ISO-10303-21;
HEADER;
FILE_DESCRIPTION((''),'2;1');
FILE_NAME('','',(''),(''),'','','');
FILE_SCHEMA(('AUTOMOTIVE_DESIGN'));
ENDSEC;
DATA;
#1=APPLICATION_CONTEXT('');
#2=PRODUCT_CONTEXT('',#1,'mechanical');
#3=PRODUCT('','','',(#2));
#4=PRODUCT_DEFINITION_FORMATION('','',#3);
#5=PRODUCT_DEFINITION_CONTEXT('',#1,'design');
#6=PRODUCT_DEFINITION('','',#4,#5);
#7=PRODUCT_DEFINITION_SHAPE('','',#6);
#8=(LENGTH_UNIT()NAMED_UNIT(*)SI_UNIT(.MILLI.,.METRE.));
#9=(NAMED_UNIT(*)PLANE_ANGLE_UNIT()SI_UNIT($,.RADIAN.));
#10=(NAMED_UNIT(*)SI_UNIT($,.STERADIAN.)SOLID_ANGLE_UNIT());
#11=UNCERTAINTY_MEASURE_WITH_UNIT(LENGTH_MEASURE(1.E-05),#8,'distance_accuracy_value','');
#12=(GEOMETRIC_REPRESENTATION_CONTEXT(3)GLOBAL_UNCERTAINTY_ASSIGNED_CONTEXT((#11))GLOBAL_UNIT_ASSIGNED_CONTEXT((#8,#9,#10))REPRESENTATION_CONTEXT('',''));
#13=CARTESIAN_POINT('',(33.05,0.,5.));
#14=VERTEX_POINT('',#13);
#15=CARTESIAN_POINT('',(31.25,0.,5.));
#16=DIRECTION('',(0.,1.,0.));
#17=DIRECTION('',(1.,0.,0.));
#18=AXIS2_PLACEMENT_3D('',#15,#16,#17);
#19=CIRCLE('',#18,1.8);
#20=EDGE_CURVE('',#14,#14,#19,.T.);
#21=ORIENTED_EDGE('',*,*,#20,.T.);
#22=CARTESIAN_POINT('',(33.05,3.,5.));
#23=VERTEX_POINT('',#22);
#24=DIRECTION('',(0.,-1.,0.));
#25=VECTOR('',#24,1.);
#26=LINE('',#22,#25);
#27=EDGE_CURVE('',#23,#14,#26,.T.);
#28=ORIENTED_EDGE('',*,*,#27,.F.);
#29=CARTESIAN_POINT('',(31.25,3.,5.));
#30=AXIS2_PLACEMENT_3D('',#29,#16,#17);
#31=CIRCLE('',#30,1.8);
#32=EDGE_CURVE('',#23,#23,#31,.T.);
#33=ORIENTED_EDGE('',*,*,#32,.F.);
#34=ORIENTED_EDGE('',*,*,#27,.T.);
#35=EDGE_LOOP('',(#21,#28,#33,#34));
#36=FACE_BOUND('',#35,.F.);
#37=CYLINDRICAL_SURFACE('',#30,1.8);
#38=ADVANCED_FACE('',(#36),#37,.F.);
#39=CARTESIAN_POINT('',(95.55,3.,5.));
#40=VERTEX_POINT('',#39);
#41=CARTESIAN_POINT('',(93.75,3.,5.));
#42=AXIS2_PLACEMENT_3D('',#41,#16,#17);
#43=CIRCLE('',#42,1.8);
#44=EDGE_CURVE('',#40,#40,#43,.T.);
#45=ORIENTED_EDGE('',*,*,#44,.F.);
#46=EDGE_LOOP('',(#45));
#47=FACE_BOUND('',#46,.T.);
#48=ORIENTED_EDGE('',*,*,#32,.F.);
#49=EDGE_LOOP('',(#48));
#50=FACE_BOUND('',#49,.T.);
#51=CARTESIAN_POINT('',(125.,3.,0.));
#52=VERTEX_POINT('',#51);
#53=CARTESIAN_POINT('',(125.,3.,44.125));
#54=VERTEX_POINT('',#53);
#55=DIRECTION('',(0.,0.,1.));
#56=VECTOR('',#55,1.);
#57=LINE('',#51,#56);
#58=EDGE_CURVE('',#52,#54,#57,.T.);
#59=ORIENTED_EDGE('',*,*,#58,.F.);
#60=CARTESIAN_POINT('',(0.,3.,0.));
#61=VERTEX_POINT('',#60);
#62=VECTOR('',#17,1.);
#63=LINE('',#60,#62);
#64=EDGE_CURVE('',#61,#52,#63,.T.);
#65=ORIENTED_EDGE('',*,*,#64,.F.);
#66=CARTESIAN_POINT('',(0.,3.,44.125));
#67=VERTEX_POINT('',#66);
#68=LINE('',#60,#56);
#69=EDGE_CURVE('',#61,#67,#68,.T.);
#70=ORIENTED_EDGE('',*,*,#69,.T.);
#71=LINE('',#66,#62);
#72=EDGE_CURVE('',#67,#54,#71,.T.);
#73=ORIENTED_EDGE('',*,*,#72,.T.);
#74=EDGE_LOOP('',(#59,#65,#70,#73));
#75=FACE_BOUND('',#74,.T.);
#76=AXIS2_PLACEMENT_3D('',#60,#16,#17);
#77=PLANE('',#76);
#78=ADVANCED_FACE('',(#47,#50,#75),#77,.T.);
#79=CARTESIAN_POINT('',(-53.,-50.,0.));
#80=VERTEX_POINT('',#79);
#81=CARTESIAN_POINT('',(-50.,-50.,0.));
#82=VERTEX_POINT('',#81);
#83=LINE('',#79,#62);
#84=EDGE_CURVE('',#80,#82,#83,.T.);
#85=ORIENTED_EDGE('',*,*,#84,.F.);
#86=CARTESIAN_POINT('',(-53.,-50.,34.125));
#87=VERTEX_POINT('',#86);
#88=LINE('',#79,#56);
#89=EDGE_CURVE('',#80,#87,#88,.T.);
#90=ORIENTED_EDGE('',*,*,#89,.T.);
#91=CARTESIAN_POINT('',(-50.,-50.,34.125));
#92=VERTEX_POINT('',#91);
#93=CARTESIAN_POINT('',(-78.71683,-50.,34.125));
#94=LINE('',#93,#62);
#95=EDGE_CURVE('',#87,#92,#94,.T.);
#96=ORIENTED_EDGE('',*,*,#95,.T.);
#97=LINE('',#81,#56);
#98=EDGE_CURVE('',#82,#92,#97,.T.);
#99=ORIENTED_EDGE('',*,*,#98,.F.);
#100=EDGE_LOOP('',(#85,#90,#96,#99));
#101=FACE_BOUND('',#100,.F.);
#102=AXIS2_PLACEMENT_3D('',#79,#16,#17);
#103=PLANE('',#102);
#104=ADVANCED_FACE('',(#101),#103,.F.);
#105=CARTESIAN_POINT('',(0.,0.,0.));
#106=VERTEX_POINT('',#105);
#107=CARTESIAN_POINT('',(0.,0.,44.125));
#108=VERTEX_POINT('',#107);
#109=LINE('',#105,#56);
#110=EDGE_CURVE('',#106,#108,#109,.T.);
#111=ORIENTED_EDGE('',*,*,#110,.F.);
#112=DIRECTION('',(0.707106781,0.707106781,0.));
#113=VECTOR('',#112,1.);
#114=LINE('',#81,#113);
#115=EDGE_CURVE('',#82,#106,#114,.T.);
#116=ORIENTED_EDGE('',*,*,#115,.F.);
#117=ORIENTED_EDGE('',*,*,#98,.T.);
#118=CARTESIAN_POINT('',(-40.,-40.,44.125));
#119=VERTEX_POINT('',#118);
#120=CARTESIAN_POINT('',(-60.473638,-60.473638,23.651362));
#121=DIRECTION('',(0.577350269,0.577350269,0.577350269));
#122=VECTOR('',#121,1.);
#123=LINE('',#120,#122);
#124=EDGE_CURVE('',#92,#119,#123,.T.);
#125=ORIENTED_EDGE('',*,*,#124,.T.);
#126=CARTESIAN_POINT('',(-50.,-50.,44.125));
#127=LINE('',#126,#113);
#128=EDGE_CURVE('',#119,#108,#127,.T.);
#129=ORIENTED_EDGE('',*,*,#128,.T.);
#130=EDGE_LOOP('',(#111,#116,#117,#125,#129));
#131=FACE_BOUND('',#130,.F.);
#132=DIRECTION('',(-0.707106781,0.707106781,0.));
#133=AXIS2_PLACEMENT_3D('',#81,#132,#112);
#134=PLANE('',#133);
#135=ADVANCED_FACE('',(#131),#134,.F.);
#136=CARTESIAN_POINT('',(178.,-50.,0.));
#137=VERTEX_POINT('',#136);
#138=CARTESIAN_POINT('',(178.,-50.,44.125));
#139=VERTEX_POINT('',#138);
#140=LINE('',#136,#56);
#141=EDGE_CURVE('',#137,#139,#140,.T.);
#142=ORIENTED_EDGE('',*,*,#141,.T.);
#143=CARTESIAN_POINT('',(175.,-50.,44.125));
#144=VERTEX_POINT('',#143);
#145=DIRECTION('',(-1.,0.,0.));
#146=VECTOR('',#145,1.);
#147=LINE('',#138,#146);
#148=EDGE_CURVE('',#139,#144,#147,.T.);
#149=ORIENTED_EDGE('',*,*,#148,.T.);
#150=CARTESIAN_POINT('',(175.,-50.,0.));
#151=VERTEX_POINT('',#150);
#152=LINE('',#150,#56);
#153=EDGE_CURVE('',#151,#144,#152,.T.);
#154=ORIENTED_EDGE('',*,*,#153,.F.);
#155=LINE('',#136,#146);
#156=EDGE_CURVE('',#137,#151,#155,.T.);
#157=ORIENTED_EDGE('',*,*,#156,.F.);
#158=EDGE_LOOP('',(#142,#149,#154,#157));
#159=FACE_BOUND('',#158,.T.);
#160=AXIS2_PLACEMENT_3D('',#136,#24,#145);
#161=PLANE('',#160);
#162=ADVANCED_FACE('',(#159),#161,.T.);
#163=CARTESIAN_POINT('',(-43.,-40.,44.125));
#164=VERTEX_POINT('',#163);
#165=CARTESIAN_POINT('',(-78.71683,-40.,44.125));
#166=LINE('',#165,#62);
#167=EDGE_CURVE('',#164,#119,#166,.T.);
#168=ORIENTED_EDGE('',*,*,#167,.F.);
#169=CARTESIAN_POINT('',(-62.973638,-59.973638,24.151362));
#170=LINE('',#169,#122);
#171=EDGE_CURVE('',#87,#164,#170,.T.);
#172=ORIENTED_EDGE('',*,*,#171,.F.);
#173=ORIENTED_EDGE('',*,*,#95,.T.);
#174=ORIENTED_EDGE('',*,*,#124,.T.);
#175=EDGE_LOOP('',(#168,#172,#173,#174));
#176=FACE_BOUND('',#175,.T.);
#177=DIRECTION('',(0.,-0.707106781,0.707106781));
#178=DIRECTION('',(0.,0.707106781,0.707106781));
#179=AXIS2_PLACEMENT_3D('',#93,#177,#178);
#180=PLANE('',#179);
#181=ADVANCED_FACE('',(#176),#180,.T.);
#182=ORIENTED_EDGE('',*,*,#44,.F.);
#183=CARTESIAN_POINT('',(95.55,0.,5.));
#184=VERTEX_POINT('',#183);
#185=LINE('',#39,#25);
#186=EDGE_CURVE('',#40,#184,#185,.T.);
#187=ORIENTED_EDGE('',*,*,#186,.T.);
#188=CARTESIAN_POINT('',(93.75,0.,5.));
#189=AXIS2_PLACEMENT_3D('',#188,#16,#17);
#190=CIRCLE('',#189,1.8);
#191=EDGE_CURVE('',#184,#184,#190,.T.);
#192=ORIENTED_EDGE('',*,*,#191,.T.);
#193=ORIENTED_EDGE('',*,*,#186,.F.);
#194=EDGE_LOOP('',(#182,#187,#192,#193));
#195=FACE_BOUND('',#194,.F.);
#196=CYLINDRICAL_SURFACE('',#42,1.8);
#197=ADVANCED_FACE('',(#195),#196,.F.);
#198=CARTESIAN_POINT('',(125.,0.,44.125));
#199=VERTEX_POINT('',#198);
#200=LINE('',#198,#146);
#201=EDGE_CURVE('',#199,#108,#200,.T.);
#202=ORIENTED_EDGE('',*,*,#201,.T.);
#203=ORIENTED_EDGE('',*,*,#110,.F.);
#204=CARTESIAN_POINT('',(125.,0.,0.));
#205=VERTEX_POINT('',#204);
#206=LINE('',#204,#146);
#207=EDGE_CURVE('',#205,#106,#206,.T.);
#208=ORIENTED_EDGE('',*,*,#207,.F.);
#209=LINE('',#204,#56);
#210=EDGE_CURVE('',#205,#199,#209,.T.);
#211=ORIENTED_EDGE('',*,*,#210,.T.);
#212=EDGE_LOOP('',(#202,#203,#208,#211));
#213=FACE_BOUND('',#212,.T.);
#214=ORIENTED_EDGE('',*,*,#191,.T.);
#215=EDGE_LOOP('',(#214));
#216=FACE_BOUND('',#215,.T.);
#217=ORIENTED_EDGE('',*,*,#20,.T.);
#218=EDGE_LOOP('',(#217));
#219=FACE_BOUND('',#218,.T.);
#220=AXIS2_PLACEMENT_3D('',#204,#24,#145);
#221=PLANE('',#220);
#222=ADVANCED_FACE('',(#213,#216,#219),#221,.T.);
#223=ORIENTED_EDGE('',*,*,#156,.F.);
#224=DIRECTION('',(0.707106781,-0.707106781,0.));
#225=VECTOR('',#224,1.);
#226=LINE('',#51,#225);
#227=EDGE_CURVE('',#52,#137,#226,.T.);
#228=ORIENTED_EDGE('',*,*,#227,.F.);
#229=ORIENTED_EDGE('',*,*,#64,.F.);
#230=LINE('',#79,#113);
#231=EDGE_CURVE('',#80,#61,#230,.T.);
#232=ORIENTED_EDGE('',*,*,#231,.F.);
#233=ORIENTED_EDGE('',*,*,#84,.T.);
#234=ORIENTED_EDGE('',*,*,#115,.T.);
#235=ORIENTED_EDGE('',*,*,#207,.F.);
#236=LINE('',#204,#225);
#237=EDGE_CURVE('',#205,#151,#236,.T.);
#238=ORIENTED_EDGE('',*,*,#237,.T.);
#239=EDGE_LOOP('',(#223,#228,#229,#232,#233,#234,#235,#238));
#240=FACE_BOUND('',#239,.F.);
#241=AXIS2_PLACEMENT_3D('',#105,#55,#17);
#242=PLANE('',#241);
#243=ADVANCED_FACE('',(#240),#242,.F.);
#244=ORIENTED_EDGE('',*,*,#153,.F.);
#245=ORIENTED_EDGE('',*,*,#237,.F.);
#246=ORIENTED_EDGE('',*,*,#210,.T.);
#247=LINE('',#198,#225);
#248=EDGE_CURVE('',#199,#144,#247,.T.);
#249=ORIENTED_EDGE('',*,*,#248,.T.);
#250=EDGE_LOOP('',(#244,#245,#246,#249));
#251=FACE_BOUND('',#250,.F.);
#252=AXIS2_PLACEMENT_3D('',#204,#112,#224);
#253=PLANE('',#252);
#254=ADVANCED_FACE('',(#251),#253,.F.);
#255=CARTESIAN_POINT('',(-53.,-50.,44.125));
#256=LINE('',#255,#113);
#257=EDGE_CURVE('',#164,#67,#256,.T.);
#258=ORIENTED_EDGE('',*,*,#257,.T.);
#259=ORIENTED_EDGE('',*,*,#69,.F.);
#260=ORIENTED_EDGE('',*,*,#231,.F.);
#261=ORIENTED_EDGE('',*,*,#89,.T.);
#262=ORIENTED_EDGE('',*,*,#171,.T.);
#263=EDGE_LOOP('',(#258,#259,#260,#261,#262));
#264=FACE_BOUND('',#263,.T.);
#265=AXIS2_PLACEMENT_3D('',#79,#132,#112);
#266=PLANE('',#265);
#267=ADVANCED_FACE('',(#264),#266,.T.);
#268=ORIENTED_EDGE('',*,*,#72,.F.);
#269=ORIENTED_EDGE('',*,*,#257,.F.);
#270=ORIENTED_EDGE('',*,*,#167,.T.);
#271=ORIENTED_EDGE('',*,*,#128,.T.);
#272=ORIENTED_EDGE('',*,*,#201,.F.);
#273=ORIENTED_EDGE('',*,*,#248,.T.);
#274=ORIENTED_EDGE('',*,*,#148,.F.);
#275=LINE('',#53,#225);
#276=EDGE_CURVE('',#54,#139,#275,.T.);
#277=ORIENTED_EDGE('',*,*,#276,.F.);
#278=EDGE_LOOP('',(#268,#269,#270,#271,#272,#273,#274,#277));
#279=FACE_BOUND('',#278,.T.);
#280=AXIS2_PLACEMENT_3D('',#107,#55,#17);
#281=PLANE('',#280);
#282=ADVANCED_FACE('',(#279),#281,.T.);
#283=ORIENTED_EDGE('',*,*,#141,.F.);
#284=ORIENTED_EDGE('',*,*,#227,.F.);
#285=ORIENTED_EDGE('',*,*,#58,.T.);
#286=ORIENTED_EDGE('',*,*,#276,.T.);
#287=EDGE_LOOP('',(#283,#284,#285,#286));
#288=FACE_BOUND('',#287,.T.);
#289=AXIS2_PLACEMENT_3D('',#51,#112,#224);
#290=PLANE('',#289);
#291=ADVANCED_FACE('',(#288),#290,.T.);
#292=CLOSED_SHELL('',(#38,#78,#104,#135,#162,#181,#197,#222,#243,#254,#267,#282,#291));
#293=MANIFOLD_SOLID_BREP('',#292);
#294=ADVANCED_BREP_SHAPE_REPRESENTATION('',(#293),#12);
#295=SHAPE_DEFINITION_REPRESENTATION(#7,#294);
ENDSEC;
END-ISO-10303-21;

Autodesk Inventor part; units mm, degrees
ref_plane "YZ Plane" through (0, 0, 0) normal (1, 0, 0) x (0, 1, 0)
ref_plane "XZ Plane" through (0, 0, 0) normal (0, 1, 0) x (-1, 0, 0)
ref_plane "XY Plane" through (0, 0, 0) normal (0, 0, 1) x (1, 0, 0)
sketch "Sketch1" plane through (0, 0, 0) normal (0, 0, 1) x (1, 0, 0)
  line L0 (-50, -50) -> (0, 0)
  line L1 (125, 0) -> (0, 0)
  line L2 (125, 0) -> (175, -50)
  line L3 (178, -50) -> (175, -50)
  line L4 (-53, -50) -> (-50, -50)
  circle A0 centre (117.5, -37.5) radius 1.5
  arc A1 (114.25, -43.8002) -> (114.25, -56.1998) centre (117.5, -50) ccw
  arc A2 (120.75, -56.1998) -> (120.75, -43.8002) centre (117.5, -50) ccw
  line L5 (-53, -50) -> (0, 3)
  line L6 (0, 3) -> (125, 3)
  line L7 (125, 3) -> (178, -50)
extrude "Extrusion1" add sketch "Sketch1" along normal blind 44.125 contours L4 L5 L6 L7 L3 L2 L1 L0
sketch "Sketch2" plane through (0, 3, 0) normal (0, 1, 0) x (1, 0, 0)
  line L0 (0, 0) -> (125, 0)
  line L1 (125, -10) -> (0, -10)
  circle A0 centre (31.25, -5) radius 1.8
  circle A1 centre (93.75, -5) radius 1.8
  line L2 (-53, 32.375) -> (-53, -10)
  line L3 (-53, -10) -> (-50, -10)
  line L4 (-50, -10) -> (0, -10)
  line L5 (0, 0) -> (-53, 0) projected
  line L6 (-53, 0) -> (-53, -44.125) projected
  line L7 (0, -44.125) -> (-53, -44.125) projected
  line L8 (0, 0) -> (0, -44.125) projected
  circle A2 centre (31.25, -5) radius 1.6
  circle A3 centre (93.75, -5) radius 1.6
  line L9 (125, 0) -> (0, 0) projected
  line L10 (0, 0) -> (0, -44.125) projected
  line L11 (125, -44.125) -> (0, -44.125) projected
  line L12 (125, 0) -> (125, -44.125) projected
  dimension "d2" = 3.2
  dimension "d3" = 3.2
extrude "Extrusion2" cut sketch "Sketch2" against normal up to surface (3 mm away) contours A0 | A1 | A2 | A3
chamfer "Chamfer2" distance 10 angle 45 1 edges at (-51.5, -50, 44.125)
properties part number "obudowa_górna_dluga" material "ABS Plastic"
